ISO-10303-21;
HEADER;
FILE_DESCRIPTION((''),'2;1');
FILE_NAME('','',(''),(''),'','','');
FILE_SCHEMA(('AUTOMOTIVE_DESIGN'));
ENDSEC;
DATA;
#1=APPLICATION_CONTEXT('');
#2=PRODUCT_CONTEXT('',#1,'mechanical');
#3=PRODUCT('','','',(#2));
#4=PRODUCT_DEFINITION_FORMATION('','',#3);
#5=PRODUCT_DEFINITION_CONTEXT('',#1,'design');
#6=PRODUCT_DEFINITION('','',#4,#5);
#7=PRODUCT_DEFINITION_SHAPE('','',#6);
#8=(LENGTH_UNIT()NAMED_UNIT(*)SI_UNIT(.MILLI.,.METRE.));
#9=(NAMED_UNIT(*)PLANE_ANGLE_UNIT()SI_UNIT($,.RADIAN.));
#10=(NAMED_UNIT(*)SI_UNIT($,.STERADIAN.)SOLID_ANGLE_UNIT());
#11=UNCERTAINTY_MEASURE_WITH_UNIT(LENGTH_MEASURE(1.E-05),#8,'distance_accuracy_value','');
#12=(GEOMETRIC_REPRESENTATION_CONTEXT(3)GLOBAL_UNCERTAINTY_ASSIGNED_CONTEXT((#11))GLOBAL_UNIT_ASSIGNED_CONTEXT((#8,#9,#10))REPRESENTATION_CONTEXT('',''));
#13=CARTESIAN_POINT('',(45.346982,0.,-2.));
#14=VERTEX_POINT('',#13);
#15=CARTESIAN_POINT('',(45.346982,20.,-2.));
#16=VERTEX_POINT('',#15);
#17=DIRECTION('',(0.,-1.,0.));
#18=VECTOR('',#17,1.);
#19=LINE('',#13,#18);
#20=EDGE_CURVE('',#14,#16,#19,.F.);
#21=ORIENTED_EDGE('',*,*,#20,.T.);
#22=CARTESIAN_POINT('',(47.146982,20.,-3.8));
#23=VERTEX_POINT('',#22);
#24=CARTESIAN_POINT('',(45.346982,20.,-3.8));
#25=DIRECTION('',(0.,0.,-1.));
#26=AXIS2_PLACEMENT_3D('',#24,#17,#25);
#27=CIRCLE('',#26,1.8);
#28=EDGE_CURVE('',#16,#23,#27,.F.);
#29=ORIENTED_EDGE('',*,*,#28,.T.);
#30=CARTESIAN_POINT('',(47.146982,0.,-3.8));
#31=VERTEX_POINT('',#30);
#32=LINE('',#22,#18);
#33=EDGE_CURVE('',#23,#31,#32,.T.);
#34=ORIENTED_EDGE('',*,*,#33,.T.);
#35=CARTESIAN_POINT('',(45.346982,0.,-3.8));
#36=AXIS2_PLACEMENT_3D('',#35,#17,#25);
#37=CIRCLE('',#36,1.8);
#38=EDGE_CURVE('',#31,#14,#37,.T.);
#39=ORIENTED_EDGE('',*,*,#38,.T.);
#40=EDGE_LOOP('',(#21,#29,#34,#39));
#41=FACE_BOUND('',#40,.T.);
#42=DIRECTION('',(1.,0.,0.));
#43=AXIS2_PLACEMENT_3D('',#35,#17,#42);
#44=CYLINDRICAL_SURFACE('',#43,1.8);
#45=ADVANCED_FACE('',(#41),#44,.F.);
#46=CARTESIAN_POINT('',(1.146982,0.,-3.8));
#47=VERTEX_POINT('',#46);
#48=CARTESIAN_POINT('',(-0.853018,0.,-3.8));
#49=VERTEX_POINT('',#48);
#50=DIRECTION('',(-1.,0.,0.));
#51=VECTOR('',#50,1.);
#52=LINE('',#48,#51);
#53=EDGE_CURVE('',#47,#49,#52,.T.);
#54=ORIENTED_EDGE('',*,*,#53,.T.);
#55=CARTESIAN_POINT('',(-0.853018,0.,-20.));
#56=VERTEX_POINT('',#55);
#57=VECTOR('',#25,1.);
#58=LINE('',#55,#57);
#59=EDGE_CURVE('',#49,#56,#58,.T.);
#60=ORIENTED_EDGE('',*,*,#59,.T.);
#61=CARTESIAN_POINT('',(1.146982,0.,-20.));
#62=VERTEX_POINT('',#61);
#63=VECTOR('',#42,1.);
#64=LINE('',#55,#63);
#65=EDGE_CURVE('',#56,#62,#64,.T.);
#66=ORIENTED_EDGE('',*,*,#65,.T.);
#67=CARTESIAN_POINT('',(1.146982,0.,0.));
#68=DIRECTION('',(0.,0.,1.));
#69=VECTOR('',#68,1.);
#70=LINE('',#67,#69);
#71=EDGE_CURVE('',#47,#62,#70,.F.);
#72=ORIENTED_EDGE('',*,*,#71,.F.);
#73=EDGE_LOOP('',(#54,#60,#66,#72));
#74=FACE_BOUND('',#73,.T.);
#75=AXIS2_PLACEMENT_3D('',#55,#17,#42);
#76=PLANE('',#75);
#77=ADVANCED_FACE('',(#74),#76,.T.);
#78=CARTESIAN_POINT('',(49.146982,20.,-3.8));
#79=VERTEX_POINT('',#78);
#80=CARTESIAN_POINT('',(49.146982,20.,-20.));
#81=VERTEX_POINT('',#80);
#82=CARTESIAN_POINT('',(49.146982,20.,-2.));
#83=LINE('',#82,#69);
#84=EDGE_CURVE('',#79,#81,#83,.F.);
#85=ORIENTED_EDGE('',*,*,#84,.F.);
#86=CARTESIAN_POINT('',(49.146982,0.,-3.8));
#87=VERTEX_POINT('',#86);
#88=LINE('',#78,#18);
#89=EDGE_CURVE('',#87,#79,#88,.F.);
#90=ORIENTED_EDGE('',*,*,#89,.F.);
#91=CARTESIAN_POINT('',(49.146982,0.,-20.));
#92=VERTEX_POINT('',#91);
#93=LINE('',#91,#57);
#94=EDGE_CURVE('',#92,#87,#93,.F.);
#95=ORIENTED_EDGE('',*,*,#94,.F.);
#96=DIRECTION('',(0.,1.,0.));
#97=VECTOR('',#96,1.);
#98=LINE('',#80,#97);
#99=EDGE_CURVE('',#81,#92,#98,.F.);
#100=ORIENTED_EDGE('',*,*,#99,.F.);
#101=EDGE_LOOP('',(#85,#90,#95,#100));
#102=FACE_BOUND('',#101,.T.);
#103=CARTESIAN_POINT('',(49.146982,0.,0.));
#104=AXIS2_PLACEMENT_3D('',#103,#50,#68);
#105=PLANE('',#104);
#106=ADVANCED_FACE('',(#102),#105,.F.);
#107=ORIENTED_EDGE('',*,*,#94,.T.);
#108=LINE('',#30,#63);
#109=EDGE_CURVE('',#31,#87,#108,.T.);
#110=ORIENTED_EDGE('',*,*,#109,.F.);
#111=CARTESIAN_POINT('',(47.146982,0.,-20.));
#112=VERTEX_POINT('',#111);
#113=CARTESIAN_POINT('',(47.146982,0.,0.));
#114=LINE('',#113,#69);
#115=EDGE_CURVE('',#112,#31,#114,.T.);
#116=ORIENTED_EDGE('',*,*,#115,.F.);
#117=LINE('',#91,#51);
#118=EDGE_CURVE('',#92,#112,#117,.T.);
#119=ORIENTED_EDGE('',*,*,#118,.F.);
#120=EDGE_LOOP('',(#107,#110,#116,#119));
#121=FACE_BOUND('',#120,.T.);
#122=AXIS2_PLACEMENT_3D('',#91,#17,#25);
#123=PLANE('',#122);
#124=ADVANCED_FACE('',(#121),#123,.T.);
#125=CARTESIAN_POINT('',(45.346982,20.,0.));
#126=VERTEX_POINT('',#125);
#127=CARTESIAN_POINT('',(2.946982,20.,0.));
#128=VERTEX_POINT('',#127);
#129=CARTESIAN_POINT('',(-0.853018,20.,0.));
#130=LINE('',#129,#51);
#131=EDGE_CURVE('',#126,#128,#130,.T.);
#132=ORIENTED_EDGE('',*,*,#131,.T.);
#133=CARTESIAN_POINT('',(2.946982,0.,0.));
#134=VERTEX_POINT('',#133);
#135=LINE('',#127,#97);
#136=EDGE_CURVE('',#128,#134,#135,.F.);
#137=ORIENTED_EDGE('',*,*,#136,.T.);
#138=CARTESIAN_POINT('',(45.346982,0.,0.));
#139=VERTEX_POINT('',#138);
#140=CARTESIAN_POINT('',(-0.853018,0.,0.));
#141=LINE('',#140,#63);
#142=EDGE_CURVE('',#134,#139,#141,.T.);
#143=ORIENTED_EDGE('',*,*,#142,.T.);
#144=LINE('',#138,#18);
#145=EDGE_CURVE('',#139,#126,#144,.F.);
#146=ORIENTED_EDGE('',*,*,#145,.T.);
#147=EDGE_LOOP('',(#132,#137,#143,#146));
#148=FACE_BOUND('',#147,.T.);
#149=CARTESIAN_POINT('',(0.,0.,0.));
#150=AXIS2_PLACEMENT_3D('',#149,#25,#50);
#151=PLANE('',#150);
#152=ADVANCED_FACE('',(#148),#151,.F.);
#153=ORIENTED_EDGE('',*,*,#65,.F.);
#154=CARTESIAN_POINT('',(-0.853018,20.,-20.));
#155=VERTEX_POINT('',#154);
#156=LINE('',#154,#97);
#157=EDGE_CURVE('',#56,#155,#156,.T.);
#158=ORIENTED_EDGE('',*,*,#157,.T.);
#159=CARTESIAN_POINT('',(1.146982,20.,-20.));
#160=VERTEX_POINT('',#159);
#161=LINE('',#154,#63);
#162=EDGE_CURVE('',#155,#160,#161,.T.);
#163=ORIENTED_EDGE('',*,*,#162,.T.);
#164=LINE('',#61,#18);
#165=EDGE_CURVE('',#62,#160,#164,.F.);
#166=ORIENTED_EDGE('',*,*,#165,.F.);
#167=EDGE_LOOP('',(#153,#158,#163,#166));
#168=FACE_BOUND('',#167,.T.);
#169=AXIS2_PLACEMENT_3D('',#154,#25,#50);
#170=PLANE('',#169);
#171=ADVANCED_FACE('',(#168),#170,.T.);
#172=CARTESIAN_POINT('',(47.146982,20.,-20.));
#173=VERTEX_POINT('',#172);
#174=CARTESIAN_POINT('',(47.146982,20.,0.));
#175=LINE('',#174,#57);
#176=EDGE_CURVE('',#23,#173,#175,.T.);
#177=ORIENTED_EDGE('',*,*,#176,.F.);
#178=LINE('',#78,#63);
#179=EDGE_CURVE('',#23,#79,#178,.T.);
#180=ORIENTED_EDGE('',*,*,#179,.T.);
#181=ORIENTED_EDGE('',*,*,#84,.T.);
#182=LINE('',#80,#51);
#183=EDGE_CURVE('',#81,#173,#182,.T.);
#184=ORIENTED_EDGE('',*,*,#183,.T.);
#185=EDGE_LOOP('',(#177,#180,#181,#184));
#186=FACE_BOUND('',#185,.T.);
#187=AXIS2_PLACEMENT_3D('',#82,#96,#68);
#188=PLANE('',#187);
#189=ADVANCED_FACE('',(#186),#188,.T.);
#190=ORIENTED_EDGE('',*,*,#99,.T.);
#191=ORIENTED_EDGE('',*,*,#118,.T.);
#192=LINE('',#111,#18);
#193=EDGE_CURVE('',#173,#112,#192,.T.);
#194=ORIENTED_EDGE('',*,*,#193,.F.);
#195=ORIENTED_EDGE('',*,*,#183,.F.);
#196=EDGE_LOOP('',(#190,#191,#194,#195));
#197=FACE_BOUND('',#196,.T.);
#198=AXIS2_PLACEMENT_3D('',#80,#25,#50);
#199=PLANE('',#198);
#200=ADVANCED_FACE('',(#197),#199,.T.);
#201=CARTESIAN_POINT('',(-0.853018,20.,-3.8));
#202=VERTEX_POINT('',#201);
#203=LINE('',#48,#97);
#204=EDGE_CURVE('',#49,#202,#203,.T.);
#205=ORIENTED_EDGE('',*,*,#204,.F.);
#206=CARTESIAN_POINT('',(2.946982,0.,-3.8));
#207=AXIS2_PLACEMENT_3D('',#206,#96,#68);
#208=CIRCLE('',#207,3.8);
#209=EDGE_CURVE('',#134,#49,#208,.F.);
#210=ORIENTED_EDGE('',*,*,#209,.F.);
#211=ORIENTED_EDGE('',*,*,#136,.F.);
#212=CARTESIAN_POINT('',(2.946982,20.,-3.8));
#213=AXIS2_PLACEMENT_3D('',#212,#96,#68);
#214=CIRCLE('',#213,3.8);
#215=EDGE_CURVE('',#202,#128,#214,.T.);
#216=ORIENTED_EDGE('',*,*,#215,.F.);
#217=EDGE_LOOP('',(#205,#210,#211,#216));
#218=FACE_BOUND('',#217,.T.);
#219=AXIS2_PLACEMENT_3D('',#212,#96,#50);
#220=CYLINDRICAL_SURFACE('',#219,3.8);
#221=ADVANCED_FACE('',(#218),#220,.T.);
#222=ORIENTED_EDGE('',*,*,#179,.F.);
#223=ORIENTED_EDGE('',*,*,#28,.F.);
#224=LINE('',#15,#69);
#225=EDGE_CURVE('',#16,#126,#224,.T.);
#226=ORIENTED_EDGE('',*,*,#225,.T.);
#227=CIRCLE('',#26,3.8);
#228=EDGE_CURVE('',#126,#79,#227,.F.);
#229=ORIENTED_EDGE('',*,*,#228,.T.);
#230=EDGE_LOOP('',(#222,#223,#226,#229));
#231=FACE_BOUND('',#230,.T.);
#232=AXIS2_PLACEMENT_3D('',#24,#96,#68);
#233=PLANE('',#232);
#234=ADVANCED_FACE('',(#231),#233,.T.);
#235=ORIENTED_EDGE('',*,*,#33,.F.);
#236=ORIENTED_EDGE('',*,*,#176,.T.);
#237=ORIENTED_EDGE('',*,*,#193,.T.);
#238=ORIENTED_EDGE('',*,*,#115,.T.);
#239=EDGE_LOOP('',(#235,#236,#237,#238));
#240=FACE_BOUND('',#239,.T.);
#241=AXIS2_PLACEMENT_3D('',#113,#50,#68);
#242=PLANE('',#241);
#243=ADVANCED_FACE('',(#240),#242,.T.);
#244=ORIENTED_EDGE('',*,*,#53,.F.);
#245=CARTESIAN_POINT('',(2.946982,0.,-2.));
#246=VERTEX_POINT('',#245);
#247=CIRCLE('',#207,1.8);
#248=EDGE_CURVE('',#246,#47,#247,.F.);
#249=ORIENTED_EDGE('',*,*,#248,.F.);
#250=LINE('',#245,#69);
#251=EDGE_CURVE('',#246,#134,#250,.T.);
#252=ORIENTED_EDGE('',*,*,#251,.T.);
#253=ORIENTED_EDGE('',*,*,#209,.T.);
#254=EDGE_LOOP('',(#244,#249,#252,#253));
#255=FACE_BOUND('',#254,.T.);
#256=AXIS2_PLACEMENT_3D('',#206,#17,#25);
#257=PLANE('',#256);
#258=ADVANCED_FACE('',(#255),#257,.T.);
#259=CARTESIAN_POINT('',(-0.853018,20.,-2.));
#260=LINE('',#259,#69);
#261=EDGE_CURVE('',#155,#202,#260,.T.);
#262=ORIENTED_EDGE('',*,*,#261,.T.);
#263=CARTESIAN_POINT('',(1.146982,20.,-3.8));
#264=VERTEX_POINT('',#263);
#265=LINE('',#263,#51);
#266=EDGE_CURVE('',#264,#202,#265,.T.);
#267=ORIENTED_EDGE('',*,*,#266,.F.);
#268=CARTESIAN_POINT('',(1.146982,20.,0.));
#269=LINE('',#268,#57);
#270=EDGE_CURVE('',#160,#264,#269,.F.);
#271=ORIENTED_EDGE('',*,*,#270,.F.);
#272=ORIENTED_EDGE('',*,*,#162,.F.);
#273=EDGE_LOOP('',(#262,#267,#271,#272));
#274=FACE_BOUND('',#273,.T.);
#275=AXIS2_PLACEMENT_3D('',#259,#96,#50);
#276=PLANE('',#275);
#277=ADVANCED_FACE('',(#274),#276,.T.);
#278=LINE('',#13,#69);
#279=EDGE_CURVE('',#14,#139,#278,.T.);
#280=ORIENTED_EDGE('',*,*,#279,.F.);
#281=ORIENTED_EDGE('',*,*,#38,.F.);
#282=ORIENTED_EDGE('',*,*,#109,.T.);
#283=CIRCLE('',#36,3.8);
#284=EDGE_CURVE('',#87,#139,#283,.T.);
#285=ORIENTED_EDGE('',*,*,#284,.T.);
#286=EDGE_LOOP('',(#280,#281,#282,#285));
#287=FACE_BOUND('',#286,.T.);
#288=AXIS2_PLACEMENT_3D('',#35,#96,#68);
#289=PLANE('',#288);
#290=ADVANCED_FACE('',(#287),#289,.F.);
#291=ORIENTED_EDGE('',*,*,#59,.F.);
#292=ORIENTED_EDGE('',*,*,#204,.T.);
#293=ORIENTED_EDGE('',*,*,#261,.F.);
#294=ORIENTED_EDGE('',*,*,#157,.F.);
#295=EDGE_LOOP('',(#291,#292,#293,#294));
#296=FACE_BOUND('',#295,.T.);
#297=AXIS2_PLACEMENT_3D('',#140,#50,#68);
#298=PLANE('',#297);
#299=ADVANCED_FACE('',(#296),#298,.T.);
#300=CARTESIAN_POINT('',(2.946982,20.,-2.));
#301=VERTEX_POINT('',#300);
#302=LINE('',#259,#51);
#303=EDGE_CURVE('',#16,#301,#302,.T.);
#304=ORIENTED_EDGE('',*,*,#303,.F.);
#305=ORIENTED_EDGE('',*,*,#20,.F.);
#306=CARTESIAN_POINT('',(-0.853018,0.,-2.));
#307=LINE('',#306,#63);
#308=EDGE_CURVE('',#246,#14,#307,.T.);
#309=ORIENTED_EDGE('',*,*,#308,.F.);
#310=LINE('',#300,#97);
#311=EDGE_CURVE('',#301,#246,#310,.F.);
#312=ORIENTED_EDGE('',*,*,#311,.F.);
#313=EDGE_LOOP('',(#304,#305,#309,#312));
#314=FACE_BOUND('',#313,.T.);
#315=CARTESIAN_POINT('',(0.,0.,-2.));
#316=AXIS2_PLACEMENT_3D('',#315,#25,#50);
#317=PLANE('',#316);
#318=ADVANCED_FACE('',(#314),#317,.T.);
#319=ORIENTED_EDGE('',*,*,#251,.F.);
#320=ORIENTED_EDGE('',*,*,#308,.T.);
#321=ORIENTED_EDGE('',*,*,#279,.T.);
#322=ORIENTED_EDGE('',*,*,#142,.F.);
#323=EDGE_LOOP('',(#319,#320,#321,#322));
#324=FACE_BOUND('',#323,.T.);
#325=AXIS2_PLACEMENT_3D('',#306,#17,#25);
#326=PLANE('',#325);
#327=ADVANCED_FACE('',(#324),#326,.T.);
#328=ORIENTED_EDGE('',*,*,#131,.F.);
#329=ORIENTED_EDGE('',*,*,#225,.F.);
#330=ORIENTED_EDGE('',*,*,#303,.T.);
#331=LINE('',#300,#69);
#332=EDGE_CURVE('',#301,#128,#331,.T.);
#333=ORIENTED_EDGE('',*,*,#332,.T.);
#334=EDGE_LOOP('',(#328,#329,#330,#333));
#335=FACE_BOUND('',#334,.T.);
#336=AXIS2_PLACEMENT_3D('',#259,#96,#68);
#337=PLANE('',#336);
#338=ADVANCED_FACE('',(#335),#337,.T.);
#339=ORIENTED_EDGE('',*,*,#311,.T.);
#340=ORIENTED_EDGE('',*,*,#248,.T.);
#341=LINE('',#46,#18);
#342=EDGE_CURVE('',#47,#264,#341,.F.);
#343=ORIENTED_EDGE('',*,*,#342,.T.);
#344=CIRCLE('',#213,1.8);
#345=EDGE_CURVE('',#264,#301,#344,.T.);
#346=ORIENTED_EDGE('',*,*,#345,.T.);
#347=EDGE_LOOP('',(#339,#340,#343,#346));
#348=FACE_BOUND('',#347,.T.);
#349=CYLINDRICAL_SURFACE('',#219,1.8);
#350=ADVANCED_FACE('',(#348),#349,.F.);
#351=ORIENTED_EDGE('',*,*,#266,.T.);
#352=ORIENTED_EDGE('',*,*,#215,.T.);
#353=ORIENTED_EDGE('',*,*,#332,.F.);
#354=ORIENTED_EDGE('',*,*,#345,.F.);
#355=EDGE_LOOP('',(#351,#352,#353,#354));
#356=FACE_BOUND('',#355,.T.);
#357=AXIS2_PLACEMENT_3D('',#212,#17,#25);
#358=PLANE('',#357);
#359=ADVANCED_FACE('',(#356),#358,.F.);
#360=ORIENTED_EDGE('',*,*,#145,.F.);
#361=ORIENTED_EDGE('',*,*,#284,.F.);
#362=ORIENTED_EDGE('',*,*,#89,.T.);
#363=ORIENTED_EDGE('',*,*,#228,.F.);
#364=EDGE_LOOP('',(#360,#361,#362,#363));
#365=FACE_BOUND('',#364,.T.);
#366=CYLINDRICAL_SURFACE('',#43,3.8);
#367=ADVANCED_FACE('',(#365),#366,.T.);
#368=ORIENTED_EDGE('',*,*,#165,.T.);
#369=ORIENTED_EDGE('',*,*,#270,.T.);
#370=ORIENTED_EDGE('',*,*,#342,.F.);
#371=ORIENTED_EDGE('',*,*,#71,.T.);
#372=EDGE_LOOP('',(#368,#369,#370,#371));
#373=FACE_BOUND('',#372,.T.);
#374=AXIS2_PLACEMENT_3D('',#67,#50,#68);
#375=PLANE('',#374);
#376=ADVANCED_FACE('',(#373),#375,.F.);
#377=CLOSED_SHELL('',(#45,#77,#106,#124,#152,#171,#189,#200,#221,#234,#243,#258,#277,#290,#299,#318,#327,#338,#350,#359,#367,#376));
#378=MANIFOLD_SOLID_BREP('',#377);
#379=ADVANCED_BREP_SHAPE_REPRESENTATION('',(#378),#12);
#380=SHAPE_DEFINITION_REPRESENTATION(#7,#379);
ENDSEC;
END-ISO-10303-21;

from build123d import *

# Parameters (mm, degrees)
SKETCH1_W                      = 50
SKETCH1_H                      = 20
BASE_FLANGE1_DEPTH             = 2
EDGE_FLANGE1_STRIP_W           = 11.6
EDGE_FLANGE1_STRIP_H           = 2
EDGE_FLANGE1_STRIP_CUT_DEPTH   = 20
EDGE_FLANGE1_STRIP_2_W         = 11.6
EDGE_FLANGE1_STRIP_2_H         = 2
EDGE_FLANGE1_STRIP_CUT_2_DEPTH = 20
EDGE_FLANGE1_DEPTH             = 20
EDGE_FLANGE1_BEND_DEPTH        = 20


# Sheet-metal steps are written as plain solids
with BuildPart() as part:
    # Sketch1 → Base-Flange1 (new body)
    with BuildSketch(Plane.XY):
        with Locations((24.146981627, 10)):
            Rectangle(SKETCH1_W, SKETCH1_H)
    extrude(amount=-BASE_FLANGE1_DEPTH)

    # Edge-Flange1 strip (across the edge) → Edge-Flange1 strip cut (cut)
    with BuildSketch(Plane(origin=(-0.853018373, 0, -2), x_dir=(1, 0, 0), z_dir=(0, 1, 0))):
        with Locations((-2, -1)):
            Rectangle(EDGE_FLANGE1_STRIP_W, EDGE_FLANGE1_STRIP_H)
    extrude(amount=EDGE_FLANGE1_STRIP_CUT_DEPTH, mode=Mode.SUBTRACT)

    # Edge-Flange1 strip 2 (across the edge) → Edge-Flange1 strip cut 2 (cut)
    with BuildSketch(Plane(origin=(49.146981627, 20, -2), x_dir=(-1, 0, 0), z_dir=(0, -1, 0))):
        with Locations((-2, -1)):
            Rectangle(EDGE_FLANGE1_STRIP_2_W, EDGE_FLANGE1_STRIP_2_H)
    extrude(amount=EDGE_FLANGE1_STRIP_CUT_2_DEPTH, mode=Mode.SUBTRACT)

    # Edge-Flange1 section (across the edge) → Edge-Flange1 (add)
    with BuildSketch(Plane(origin=(-0.853018373, 0, -2), x_dir=(1, 0, 0), z_dir=(0, 1, 0))):
        with BuildLine():
            Line((0, 1.8), (0, 18))
            Line((0, 18), (2, 18))
            Line((2, 18), (2, 1.8))
            ThreePointArc((2, 1.8), (2.527207794, 0.527207794), (3.8, 0))
            Line((3.8, 0), (3.8, -2))
            ThreePointArc((3.8, -2), (1.112994231, -0.887005769), (0, 1.8))
        make_face()
    extrude(amount=EDGE_FLANGE1_DEPTH)

    # Edge-Flange1 section 2 (across the edge) → Edge-Flange1 bend (add)
    with BuildSketch(Plane(origin=(49.146981627, 20, -2), x_dir=(-1, 0, 0), z_dir=(0, -1, 0))):
        with BuildLine():
            Line((0, 1.8), (0, 18))
            Line((0, 18), (2, 18))
            Line((2, 18), (2, 1.8))
            ThreePointArc((2, 1.8), (2.527207794, 0.527207794), (3.8, 0))
            Line((3.8, 0), (3.8, -2))
            ThreePointArc((3.8, -2), (1.112994231, -0.887005769), (0, 1.8))
        make_face()
    extrude(amount=EDGE_FLANGE1_BEND_DEPTH)


solid = part.part
